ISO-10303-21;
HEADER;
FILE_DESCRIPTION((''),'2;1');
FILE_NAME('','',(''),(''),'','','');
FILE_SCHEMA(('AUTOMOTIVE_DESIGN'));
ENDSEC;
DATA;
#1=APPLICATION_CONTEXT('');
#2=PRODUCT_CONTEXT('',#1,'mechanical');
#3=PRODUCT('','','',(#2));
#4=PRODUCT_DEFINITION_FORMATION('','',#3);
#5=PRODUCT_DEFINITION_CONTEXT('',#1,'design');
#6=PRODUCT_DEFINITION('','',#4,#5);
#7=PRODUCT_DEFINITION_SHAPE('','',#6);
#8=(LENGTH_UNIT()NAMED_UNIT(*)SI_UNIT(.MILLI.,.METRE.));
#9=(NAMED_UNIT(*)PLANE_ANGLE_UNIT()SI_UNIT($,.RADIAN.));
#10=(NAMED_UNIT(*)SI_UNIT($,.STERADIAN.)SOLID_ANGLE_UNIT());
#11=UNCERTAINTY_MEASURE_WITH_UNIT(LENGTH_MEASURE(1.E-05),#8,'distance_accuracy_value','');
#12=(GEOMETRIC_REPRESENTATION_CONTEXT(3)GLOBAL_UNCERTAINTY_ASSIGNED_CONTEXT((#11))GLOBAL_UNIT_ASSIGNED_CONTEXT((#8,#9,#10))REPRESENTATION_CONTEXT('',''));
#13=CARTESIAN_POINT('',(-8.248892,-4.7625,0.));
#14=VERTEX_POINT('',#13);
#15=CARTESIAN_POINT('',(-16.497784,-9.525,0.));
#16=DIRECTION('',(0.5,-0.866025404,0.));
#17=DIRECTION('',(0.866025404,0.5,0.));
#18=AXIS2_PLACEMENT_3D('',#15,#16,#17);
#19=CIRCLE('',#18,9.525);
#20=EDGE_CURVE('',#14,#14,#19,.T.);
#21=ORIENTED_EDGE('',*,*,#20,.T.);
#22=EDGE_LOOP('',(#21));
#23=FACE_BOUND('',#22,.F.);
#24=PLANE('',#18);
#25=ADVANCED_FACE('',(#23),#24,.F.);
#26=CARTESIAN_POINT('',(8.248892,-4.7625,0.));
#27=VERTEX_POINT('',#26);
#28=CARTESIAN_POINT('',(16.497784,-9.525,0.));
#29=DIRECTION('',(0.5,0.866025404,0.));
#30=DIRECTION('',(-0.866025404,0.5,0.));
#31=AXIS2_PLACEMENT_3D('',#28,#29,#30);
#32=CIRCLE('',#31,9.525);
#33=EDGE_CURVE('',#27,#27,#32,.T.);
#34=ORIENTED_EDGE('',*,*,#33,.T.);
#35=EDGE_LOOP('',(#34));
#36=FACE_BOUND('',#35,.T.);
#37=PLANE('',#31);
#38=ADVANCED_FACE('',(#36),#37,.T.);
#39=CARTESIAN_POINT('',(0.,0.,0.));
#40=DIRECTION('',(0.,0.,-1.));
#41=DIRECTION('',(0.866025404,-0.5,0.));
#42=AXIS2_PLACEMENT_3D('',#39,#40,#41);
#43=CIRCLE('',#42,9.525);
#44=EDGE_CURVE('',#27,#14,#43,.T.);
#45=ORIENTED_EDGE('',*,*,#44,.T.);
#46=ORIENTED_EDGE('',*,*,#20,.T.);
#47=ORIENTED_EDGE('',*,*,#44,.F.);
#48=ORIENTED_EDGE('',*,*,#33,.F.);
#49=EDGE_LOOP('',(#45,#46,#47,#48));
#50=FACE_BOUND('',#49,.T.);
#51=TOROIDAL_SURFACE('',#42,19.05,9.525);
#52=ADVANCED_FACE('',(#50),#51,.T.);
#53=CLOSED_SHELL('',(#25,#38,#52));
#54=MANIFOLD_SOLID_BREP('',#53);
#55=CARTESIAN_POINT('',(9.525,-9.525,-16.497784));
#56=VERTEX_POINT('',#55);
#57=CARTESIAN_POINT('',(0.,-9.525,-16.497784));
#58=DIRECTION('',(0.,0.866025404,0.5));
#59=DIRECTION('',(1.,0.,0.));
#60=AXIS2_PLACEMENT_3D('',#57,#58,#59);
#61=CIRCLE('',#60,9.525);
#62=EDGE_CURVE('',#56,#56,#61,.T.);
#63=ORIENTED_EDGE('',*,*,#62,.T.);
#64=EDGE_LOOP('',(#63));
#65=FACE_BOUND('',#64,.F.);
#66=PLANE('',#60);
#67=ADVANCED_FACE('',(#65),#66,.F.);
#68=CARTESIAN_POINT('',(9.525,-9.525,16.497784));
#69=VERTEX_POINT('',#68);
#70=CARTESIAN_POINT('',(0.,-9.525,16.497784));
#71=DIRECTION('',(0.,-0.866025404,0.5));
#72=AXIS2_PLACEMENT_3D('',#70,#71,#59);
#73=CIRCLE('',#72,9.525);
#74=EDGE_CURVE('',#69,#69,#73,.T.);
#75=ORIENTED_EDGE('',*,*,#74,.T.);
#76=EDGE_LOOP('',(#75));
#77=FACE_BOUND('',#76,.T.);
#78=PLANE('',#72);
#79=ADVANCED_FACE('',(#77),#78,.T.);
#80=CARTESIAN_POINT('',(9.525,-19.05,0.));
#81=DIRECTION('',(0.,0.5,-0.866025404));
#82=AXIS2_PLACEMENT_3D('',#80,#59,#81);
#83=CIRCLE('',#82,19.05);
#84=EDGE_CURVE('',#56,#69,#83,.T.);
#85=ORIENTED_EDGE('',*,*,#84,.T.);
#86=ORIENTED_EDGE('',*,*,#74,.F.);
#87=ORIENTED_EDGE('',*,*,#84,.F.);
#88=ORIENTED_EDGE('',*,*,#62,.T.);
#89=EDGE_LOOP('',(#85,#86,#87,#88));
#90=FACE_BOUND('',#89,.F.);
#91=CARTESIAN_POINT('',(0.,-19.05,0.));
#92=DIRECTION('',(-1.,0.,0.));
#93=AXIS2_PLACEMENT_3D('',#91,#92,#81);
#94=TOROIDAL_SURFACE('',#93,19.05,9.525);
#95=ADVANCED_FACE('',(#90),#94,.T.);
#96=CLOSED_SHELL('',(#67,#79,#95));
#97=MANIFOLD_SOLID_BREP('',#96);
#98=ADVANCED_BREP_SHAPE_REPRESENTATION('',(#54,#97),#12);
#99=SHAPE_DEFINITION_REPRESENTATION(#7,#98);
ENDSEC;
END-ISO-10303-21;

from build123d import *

# Parameters (mm, degrees)
F0_R          = 9.525
F1_ANGLE_BACK = 60
F1_ANGLE      = 120
F2_R          = 9.525
F3_ANGLE_BACK = 60
F3_ANGLE      = 120


with BuildPart() as f1:
    # F0 (on Right) → F1 (revolve)
    with BuildSketch(Plane.YZ, mode=Mode.PRIVATE) as f1_sk:
        with Locations((-19.05, 0)):
            Circle(F0_R)
    revolve(f1_sk.sketch.rotate(Axis((0, 0, 8.618671447), (0, 0, -1)), -F1_ANGLE_BACK), axis=Axis((0, 0, 8.618671447), (0, 0, -1)), revolution_arc=F1_ANGLE)


with BuildPart() as f3:
    # F2 (on Top) → F3 (revolve)
    with BuildSketch(Plane.XY, mode=Mode.PRIVATE) as f3_sk:
        Circle(F2_R)
    revolve(f3_sk.sketch.rotate(Axis((9.3368953094, -19.05, 0), (1, 0, 0)), -F3_ANGLE_BACK), axis=Axis((9.3368953094, -19.05, 0), (1, 0, 0)), revolution_arc=F3_ANGLE)


solid = Compound([f1.part, f3.part])
